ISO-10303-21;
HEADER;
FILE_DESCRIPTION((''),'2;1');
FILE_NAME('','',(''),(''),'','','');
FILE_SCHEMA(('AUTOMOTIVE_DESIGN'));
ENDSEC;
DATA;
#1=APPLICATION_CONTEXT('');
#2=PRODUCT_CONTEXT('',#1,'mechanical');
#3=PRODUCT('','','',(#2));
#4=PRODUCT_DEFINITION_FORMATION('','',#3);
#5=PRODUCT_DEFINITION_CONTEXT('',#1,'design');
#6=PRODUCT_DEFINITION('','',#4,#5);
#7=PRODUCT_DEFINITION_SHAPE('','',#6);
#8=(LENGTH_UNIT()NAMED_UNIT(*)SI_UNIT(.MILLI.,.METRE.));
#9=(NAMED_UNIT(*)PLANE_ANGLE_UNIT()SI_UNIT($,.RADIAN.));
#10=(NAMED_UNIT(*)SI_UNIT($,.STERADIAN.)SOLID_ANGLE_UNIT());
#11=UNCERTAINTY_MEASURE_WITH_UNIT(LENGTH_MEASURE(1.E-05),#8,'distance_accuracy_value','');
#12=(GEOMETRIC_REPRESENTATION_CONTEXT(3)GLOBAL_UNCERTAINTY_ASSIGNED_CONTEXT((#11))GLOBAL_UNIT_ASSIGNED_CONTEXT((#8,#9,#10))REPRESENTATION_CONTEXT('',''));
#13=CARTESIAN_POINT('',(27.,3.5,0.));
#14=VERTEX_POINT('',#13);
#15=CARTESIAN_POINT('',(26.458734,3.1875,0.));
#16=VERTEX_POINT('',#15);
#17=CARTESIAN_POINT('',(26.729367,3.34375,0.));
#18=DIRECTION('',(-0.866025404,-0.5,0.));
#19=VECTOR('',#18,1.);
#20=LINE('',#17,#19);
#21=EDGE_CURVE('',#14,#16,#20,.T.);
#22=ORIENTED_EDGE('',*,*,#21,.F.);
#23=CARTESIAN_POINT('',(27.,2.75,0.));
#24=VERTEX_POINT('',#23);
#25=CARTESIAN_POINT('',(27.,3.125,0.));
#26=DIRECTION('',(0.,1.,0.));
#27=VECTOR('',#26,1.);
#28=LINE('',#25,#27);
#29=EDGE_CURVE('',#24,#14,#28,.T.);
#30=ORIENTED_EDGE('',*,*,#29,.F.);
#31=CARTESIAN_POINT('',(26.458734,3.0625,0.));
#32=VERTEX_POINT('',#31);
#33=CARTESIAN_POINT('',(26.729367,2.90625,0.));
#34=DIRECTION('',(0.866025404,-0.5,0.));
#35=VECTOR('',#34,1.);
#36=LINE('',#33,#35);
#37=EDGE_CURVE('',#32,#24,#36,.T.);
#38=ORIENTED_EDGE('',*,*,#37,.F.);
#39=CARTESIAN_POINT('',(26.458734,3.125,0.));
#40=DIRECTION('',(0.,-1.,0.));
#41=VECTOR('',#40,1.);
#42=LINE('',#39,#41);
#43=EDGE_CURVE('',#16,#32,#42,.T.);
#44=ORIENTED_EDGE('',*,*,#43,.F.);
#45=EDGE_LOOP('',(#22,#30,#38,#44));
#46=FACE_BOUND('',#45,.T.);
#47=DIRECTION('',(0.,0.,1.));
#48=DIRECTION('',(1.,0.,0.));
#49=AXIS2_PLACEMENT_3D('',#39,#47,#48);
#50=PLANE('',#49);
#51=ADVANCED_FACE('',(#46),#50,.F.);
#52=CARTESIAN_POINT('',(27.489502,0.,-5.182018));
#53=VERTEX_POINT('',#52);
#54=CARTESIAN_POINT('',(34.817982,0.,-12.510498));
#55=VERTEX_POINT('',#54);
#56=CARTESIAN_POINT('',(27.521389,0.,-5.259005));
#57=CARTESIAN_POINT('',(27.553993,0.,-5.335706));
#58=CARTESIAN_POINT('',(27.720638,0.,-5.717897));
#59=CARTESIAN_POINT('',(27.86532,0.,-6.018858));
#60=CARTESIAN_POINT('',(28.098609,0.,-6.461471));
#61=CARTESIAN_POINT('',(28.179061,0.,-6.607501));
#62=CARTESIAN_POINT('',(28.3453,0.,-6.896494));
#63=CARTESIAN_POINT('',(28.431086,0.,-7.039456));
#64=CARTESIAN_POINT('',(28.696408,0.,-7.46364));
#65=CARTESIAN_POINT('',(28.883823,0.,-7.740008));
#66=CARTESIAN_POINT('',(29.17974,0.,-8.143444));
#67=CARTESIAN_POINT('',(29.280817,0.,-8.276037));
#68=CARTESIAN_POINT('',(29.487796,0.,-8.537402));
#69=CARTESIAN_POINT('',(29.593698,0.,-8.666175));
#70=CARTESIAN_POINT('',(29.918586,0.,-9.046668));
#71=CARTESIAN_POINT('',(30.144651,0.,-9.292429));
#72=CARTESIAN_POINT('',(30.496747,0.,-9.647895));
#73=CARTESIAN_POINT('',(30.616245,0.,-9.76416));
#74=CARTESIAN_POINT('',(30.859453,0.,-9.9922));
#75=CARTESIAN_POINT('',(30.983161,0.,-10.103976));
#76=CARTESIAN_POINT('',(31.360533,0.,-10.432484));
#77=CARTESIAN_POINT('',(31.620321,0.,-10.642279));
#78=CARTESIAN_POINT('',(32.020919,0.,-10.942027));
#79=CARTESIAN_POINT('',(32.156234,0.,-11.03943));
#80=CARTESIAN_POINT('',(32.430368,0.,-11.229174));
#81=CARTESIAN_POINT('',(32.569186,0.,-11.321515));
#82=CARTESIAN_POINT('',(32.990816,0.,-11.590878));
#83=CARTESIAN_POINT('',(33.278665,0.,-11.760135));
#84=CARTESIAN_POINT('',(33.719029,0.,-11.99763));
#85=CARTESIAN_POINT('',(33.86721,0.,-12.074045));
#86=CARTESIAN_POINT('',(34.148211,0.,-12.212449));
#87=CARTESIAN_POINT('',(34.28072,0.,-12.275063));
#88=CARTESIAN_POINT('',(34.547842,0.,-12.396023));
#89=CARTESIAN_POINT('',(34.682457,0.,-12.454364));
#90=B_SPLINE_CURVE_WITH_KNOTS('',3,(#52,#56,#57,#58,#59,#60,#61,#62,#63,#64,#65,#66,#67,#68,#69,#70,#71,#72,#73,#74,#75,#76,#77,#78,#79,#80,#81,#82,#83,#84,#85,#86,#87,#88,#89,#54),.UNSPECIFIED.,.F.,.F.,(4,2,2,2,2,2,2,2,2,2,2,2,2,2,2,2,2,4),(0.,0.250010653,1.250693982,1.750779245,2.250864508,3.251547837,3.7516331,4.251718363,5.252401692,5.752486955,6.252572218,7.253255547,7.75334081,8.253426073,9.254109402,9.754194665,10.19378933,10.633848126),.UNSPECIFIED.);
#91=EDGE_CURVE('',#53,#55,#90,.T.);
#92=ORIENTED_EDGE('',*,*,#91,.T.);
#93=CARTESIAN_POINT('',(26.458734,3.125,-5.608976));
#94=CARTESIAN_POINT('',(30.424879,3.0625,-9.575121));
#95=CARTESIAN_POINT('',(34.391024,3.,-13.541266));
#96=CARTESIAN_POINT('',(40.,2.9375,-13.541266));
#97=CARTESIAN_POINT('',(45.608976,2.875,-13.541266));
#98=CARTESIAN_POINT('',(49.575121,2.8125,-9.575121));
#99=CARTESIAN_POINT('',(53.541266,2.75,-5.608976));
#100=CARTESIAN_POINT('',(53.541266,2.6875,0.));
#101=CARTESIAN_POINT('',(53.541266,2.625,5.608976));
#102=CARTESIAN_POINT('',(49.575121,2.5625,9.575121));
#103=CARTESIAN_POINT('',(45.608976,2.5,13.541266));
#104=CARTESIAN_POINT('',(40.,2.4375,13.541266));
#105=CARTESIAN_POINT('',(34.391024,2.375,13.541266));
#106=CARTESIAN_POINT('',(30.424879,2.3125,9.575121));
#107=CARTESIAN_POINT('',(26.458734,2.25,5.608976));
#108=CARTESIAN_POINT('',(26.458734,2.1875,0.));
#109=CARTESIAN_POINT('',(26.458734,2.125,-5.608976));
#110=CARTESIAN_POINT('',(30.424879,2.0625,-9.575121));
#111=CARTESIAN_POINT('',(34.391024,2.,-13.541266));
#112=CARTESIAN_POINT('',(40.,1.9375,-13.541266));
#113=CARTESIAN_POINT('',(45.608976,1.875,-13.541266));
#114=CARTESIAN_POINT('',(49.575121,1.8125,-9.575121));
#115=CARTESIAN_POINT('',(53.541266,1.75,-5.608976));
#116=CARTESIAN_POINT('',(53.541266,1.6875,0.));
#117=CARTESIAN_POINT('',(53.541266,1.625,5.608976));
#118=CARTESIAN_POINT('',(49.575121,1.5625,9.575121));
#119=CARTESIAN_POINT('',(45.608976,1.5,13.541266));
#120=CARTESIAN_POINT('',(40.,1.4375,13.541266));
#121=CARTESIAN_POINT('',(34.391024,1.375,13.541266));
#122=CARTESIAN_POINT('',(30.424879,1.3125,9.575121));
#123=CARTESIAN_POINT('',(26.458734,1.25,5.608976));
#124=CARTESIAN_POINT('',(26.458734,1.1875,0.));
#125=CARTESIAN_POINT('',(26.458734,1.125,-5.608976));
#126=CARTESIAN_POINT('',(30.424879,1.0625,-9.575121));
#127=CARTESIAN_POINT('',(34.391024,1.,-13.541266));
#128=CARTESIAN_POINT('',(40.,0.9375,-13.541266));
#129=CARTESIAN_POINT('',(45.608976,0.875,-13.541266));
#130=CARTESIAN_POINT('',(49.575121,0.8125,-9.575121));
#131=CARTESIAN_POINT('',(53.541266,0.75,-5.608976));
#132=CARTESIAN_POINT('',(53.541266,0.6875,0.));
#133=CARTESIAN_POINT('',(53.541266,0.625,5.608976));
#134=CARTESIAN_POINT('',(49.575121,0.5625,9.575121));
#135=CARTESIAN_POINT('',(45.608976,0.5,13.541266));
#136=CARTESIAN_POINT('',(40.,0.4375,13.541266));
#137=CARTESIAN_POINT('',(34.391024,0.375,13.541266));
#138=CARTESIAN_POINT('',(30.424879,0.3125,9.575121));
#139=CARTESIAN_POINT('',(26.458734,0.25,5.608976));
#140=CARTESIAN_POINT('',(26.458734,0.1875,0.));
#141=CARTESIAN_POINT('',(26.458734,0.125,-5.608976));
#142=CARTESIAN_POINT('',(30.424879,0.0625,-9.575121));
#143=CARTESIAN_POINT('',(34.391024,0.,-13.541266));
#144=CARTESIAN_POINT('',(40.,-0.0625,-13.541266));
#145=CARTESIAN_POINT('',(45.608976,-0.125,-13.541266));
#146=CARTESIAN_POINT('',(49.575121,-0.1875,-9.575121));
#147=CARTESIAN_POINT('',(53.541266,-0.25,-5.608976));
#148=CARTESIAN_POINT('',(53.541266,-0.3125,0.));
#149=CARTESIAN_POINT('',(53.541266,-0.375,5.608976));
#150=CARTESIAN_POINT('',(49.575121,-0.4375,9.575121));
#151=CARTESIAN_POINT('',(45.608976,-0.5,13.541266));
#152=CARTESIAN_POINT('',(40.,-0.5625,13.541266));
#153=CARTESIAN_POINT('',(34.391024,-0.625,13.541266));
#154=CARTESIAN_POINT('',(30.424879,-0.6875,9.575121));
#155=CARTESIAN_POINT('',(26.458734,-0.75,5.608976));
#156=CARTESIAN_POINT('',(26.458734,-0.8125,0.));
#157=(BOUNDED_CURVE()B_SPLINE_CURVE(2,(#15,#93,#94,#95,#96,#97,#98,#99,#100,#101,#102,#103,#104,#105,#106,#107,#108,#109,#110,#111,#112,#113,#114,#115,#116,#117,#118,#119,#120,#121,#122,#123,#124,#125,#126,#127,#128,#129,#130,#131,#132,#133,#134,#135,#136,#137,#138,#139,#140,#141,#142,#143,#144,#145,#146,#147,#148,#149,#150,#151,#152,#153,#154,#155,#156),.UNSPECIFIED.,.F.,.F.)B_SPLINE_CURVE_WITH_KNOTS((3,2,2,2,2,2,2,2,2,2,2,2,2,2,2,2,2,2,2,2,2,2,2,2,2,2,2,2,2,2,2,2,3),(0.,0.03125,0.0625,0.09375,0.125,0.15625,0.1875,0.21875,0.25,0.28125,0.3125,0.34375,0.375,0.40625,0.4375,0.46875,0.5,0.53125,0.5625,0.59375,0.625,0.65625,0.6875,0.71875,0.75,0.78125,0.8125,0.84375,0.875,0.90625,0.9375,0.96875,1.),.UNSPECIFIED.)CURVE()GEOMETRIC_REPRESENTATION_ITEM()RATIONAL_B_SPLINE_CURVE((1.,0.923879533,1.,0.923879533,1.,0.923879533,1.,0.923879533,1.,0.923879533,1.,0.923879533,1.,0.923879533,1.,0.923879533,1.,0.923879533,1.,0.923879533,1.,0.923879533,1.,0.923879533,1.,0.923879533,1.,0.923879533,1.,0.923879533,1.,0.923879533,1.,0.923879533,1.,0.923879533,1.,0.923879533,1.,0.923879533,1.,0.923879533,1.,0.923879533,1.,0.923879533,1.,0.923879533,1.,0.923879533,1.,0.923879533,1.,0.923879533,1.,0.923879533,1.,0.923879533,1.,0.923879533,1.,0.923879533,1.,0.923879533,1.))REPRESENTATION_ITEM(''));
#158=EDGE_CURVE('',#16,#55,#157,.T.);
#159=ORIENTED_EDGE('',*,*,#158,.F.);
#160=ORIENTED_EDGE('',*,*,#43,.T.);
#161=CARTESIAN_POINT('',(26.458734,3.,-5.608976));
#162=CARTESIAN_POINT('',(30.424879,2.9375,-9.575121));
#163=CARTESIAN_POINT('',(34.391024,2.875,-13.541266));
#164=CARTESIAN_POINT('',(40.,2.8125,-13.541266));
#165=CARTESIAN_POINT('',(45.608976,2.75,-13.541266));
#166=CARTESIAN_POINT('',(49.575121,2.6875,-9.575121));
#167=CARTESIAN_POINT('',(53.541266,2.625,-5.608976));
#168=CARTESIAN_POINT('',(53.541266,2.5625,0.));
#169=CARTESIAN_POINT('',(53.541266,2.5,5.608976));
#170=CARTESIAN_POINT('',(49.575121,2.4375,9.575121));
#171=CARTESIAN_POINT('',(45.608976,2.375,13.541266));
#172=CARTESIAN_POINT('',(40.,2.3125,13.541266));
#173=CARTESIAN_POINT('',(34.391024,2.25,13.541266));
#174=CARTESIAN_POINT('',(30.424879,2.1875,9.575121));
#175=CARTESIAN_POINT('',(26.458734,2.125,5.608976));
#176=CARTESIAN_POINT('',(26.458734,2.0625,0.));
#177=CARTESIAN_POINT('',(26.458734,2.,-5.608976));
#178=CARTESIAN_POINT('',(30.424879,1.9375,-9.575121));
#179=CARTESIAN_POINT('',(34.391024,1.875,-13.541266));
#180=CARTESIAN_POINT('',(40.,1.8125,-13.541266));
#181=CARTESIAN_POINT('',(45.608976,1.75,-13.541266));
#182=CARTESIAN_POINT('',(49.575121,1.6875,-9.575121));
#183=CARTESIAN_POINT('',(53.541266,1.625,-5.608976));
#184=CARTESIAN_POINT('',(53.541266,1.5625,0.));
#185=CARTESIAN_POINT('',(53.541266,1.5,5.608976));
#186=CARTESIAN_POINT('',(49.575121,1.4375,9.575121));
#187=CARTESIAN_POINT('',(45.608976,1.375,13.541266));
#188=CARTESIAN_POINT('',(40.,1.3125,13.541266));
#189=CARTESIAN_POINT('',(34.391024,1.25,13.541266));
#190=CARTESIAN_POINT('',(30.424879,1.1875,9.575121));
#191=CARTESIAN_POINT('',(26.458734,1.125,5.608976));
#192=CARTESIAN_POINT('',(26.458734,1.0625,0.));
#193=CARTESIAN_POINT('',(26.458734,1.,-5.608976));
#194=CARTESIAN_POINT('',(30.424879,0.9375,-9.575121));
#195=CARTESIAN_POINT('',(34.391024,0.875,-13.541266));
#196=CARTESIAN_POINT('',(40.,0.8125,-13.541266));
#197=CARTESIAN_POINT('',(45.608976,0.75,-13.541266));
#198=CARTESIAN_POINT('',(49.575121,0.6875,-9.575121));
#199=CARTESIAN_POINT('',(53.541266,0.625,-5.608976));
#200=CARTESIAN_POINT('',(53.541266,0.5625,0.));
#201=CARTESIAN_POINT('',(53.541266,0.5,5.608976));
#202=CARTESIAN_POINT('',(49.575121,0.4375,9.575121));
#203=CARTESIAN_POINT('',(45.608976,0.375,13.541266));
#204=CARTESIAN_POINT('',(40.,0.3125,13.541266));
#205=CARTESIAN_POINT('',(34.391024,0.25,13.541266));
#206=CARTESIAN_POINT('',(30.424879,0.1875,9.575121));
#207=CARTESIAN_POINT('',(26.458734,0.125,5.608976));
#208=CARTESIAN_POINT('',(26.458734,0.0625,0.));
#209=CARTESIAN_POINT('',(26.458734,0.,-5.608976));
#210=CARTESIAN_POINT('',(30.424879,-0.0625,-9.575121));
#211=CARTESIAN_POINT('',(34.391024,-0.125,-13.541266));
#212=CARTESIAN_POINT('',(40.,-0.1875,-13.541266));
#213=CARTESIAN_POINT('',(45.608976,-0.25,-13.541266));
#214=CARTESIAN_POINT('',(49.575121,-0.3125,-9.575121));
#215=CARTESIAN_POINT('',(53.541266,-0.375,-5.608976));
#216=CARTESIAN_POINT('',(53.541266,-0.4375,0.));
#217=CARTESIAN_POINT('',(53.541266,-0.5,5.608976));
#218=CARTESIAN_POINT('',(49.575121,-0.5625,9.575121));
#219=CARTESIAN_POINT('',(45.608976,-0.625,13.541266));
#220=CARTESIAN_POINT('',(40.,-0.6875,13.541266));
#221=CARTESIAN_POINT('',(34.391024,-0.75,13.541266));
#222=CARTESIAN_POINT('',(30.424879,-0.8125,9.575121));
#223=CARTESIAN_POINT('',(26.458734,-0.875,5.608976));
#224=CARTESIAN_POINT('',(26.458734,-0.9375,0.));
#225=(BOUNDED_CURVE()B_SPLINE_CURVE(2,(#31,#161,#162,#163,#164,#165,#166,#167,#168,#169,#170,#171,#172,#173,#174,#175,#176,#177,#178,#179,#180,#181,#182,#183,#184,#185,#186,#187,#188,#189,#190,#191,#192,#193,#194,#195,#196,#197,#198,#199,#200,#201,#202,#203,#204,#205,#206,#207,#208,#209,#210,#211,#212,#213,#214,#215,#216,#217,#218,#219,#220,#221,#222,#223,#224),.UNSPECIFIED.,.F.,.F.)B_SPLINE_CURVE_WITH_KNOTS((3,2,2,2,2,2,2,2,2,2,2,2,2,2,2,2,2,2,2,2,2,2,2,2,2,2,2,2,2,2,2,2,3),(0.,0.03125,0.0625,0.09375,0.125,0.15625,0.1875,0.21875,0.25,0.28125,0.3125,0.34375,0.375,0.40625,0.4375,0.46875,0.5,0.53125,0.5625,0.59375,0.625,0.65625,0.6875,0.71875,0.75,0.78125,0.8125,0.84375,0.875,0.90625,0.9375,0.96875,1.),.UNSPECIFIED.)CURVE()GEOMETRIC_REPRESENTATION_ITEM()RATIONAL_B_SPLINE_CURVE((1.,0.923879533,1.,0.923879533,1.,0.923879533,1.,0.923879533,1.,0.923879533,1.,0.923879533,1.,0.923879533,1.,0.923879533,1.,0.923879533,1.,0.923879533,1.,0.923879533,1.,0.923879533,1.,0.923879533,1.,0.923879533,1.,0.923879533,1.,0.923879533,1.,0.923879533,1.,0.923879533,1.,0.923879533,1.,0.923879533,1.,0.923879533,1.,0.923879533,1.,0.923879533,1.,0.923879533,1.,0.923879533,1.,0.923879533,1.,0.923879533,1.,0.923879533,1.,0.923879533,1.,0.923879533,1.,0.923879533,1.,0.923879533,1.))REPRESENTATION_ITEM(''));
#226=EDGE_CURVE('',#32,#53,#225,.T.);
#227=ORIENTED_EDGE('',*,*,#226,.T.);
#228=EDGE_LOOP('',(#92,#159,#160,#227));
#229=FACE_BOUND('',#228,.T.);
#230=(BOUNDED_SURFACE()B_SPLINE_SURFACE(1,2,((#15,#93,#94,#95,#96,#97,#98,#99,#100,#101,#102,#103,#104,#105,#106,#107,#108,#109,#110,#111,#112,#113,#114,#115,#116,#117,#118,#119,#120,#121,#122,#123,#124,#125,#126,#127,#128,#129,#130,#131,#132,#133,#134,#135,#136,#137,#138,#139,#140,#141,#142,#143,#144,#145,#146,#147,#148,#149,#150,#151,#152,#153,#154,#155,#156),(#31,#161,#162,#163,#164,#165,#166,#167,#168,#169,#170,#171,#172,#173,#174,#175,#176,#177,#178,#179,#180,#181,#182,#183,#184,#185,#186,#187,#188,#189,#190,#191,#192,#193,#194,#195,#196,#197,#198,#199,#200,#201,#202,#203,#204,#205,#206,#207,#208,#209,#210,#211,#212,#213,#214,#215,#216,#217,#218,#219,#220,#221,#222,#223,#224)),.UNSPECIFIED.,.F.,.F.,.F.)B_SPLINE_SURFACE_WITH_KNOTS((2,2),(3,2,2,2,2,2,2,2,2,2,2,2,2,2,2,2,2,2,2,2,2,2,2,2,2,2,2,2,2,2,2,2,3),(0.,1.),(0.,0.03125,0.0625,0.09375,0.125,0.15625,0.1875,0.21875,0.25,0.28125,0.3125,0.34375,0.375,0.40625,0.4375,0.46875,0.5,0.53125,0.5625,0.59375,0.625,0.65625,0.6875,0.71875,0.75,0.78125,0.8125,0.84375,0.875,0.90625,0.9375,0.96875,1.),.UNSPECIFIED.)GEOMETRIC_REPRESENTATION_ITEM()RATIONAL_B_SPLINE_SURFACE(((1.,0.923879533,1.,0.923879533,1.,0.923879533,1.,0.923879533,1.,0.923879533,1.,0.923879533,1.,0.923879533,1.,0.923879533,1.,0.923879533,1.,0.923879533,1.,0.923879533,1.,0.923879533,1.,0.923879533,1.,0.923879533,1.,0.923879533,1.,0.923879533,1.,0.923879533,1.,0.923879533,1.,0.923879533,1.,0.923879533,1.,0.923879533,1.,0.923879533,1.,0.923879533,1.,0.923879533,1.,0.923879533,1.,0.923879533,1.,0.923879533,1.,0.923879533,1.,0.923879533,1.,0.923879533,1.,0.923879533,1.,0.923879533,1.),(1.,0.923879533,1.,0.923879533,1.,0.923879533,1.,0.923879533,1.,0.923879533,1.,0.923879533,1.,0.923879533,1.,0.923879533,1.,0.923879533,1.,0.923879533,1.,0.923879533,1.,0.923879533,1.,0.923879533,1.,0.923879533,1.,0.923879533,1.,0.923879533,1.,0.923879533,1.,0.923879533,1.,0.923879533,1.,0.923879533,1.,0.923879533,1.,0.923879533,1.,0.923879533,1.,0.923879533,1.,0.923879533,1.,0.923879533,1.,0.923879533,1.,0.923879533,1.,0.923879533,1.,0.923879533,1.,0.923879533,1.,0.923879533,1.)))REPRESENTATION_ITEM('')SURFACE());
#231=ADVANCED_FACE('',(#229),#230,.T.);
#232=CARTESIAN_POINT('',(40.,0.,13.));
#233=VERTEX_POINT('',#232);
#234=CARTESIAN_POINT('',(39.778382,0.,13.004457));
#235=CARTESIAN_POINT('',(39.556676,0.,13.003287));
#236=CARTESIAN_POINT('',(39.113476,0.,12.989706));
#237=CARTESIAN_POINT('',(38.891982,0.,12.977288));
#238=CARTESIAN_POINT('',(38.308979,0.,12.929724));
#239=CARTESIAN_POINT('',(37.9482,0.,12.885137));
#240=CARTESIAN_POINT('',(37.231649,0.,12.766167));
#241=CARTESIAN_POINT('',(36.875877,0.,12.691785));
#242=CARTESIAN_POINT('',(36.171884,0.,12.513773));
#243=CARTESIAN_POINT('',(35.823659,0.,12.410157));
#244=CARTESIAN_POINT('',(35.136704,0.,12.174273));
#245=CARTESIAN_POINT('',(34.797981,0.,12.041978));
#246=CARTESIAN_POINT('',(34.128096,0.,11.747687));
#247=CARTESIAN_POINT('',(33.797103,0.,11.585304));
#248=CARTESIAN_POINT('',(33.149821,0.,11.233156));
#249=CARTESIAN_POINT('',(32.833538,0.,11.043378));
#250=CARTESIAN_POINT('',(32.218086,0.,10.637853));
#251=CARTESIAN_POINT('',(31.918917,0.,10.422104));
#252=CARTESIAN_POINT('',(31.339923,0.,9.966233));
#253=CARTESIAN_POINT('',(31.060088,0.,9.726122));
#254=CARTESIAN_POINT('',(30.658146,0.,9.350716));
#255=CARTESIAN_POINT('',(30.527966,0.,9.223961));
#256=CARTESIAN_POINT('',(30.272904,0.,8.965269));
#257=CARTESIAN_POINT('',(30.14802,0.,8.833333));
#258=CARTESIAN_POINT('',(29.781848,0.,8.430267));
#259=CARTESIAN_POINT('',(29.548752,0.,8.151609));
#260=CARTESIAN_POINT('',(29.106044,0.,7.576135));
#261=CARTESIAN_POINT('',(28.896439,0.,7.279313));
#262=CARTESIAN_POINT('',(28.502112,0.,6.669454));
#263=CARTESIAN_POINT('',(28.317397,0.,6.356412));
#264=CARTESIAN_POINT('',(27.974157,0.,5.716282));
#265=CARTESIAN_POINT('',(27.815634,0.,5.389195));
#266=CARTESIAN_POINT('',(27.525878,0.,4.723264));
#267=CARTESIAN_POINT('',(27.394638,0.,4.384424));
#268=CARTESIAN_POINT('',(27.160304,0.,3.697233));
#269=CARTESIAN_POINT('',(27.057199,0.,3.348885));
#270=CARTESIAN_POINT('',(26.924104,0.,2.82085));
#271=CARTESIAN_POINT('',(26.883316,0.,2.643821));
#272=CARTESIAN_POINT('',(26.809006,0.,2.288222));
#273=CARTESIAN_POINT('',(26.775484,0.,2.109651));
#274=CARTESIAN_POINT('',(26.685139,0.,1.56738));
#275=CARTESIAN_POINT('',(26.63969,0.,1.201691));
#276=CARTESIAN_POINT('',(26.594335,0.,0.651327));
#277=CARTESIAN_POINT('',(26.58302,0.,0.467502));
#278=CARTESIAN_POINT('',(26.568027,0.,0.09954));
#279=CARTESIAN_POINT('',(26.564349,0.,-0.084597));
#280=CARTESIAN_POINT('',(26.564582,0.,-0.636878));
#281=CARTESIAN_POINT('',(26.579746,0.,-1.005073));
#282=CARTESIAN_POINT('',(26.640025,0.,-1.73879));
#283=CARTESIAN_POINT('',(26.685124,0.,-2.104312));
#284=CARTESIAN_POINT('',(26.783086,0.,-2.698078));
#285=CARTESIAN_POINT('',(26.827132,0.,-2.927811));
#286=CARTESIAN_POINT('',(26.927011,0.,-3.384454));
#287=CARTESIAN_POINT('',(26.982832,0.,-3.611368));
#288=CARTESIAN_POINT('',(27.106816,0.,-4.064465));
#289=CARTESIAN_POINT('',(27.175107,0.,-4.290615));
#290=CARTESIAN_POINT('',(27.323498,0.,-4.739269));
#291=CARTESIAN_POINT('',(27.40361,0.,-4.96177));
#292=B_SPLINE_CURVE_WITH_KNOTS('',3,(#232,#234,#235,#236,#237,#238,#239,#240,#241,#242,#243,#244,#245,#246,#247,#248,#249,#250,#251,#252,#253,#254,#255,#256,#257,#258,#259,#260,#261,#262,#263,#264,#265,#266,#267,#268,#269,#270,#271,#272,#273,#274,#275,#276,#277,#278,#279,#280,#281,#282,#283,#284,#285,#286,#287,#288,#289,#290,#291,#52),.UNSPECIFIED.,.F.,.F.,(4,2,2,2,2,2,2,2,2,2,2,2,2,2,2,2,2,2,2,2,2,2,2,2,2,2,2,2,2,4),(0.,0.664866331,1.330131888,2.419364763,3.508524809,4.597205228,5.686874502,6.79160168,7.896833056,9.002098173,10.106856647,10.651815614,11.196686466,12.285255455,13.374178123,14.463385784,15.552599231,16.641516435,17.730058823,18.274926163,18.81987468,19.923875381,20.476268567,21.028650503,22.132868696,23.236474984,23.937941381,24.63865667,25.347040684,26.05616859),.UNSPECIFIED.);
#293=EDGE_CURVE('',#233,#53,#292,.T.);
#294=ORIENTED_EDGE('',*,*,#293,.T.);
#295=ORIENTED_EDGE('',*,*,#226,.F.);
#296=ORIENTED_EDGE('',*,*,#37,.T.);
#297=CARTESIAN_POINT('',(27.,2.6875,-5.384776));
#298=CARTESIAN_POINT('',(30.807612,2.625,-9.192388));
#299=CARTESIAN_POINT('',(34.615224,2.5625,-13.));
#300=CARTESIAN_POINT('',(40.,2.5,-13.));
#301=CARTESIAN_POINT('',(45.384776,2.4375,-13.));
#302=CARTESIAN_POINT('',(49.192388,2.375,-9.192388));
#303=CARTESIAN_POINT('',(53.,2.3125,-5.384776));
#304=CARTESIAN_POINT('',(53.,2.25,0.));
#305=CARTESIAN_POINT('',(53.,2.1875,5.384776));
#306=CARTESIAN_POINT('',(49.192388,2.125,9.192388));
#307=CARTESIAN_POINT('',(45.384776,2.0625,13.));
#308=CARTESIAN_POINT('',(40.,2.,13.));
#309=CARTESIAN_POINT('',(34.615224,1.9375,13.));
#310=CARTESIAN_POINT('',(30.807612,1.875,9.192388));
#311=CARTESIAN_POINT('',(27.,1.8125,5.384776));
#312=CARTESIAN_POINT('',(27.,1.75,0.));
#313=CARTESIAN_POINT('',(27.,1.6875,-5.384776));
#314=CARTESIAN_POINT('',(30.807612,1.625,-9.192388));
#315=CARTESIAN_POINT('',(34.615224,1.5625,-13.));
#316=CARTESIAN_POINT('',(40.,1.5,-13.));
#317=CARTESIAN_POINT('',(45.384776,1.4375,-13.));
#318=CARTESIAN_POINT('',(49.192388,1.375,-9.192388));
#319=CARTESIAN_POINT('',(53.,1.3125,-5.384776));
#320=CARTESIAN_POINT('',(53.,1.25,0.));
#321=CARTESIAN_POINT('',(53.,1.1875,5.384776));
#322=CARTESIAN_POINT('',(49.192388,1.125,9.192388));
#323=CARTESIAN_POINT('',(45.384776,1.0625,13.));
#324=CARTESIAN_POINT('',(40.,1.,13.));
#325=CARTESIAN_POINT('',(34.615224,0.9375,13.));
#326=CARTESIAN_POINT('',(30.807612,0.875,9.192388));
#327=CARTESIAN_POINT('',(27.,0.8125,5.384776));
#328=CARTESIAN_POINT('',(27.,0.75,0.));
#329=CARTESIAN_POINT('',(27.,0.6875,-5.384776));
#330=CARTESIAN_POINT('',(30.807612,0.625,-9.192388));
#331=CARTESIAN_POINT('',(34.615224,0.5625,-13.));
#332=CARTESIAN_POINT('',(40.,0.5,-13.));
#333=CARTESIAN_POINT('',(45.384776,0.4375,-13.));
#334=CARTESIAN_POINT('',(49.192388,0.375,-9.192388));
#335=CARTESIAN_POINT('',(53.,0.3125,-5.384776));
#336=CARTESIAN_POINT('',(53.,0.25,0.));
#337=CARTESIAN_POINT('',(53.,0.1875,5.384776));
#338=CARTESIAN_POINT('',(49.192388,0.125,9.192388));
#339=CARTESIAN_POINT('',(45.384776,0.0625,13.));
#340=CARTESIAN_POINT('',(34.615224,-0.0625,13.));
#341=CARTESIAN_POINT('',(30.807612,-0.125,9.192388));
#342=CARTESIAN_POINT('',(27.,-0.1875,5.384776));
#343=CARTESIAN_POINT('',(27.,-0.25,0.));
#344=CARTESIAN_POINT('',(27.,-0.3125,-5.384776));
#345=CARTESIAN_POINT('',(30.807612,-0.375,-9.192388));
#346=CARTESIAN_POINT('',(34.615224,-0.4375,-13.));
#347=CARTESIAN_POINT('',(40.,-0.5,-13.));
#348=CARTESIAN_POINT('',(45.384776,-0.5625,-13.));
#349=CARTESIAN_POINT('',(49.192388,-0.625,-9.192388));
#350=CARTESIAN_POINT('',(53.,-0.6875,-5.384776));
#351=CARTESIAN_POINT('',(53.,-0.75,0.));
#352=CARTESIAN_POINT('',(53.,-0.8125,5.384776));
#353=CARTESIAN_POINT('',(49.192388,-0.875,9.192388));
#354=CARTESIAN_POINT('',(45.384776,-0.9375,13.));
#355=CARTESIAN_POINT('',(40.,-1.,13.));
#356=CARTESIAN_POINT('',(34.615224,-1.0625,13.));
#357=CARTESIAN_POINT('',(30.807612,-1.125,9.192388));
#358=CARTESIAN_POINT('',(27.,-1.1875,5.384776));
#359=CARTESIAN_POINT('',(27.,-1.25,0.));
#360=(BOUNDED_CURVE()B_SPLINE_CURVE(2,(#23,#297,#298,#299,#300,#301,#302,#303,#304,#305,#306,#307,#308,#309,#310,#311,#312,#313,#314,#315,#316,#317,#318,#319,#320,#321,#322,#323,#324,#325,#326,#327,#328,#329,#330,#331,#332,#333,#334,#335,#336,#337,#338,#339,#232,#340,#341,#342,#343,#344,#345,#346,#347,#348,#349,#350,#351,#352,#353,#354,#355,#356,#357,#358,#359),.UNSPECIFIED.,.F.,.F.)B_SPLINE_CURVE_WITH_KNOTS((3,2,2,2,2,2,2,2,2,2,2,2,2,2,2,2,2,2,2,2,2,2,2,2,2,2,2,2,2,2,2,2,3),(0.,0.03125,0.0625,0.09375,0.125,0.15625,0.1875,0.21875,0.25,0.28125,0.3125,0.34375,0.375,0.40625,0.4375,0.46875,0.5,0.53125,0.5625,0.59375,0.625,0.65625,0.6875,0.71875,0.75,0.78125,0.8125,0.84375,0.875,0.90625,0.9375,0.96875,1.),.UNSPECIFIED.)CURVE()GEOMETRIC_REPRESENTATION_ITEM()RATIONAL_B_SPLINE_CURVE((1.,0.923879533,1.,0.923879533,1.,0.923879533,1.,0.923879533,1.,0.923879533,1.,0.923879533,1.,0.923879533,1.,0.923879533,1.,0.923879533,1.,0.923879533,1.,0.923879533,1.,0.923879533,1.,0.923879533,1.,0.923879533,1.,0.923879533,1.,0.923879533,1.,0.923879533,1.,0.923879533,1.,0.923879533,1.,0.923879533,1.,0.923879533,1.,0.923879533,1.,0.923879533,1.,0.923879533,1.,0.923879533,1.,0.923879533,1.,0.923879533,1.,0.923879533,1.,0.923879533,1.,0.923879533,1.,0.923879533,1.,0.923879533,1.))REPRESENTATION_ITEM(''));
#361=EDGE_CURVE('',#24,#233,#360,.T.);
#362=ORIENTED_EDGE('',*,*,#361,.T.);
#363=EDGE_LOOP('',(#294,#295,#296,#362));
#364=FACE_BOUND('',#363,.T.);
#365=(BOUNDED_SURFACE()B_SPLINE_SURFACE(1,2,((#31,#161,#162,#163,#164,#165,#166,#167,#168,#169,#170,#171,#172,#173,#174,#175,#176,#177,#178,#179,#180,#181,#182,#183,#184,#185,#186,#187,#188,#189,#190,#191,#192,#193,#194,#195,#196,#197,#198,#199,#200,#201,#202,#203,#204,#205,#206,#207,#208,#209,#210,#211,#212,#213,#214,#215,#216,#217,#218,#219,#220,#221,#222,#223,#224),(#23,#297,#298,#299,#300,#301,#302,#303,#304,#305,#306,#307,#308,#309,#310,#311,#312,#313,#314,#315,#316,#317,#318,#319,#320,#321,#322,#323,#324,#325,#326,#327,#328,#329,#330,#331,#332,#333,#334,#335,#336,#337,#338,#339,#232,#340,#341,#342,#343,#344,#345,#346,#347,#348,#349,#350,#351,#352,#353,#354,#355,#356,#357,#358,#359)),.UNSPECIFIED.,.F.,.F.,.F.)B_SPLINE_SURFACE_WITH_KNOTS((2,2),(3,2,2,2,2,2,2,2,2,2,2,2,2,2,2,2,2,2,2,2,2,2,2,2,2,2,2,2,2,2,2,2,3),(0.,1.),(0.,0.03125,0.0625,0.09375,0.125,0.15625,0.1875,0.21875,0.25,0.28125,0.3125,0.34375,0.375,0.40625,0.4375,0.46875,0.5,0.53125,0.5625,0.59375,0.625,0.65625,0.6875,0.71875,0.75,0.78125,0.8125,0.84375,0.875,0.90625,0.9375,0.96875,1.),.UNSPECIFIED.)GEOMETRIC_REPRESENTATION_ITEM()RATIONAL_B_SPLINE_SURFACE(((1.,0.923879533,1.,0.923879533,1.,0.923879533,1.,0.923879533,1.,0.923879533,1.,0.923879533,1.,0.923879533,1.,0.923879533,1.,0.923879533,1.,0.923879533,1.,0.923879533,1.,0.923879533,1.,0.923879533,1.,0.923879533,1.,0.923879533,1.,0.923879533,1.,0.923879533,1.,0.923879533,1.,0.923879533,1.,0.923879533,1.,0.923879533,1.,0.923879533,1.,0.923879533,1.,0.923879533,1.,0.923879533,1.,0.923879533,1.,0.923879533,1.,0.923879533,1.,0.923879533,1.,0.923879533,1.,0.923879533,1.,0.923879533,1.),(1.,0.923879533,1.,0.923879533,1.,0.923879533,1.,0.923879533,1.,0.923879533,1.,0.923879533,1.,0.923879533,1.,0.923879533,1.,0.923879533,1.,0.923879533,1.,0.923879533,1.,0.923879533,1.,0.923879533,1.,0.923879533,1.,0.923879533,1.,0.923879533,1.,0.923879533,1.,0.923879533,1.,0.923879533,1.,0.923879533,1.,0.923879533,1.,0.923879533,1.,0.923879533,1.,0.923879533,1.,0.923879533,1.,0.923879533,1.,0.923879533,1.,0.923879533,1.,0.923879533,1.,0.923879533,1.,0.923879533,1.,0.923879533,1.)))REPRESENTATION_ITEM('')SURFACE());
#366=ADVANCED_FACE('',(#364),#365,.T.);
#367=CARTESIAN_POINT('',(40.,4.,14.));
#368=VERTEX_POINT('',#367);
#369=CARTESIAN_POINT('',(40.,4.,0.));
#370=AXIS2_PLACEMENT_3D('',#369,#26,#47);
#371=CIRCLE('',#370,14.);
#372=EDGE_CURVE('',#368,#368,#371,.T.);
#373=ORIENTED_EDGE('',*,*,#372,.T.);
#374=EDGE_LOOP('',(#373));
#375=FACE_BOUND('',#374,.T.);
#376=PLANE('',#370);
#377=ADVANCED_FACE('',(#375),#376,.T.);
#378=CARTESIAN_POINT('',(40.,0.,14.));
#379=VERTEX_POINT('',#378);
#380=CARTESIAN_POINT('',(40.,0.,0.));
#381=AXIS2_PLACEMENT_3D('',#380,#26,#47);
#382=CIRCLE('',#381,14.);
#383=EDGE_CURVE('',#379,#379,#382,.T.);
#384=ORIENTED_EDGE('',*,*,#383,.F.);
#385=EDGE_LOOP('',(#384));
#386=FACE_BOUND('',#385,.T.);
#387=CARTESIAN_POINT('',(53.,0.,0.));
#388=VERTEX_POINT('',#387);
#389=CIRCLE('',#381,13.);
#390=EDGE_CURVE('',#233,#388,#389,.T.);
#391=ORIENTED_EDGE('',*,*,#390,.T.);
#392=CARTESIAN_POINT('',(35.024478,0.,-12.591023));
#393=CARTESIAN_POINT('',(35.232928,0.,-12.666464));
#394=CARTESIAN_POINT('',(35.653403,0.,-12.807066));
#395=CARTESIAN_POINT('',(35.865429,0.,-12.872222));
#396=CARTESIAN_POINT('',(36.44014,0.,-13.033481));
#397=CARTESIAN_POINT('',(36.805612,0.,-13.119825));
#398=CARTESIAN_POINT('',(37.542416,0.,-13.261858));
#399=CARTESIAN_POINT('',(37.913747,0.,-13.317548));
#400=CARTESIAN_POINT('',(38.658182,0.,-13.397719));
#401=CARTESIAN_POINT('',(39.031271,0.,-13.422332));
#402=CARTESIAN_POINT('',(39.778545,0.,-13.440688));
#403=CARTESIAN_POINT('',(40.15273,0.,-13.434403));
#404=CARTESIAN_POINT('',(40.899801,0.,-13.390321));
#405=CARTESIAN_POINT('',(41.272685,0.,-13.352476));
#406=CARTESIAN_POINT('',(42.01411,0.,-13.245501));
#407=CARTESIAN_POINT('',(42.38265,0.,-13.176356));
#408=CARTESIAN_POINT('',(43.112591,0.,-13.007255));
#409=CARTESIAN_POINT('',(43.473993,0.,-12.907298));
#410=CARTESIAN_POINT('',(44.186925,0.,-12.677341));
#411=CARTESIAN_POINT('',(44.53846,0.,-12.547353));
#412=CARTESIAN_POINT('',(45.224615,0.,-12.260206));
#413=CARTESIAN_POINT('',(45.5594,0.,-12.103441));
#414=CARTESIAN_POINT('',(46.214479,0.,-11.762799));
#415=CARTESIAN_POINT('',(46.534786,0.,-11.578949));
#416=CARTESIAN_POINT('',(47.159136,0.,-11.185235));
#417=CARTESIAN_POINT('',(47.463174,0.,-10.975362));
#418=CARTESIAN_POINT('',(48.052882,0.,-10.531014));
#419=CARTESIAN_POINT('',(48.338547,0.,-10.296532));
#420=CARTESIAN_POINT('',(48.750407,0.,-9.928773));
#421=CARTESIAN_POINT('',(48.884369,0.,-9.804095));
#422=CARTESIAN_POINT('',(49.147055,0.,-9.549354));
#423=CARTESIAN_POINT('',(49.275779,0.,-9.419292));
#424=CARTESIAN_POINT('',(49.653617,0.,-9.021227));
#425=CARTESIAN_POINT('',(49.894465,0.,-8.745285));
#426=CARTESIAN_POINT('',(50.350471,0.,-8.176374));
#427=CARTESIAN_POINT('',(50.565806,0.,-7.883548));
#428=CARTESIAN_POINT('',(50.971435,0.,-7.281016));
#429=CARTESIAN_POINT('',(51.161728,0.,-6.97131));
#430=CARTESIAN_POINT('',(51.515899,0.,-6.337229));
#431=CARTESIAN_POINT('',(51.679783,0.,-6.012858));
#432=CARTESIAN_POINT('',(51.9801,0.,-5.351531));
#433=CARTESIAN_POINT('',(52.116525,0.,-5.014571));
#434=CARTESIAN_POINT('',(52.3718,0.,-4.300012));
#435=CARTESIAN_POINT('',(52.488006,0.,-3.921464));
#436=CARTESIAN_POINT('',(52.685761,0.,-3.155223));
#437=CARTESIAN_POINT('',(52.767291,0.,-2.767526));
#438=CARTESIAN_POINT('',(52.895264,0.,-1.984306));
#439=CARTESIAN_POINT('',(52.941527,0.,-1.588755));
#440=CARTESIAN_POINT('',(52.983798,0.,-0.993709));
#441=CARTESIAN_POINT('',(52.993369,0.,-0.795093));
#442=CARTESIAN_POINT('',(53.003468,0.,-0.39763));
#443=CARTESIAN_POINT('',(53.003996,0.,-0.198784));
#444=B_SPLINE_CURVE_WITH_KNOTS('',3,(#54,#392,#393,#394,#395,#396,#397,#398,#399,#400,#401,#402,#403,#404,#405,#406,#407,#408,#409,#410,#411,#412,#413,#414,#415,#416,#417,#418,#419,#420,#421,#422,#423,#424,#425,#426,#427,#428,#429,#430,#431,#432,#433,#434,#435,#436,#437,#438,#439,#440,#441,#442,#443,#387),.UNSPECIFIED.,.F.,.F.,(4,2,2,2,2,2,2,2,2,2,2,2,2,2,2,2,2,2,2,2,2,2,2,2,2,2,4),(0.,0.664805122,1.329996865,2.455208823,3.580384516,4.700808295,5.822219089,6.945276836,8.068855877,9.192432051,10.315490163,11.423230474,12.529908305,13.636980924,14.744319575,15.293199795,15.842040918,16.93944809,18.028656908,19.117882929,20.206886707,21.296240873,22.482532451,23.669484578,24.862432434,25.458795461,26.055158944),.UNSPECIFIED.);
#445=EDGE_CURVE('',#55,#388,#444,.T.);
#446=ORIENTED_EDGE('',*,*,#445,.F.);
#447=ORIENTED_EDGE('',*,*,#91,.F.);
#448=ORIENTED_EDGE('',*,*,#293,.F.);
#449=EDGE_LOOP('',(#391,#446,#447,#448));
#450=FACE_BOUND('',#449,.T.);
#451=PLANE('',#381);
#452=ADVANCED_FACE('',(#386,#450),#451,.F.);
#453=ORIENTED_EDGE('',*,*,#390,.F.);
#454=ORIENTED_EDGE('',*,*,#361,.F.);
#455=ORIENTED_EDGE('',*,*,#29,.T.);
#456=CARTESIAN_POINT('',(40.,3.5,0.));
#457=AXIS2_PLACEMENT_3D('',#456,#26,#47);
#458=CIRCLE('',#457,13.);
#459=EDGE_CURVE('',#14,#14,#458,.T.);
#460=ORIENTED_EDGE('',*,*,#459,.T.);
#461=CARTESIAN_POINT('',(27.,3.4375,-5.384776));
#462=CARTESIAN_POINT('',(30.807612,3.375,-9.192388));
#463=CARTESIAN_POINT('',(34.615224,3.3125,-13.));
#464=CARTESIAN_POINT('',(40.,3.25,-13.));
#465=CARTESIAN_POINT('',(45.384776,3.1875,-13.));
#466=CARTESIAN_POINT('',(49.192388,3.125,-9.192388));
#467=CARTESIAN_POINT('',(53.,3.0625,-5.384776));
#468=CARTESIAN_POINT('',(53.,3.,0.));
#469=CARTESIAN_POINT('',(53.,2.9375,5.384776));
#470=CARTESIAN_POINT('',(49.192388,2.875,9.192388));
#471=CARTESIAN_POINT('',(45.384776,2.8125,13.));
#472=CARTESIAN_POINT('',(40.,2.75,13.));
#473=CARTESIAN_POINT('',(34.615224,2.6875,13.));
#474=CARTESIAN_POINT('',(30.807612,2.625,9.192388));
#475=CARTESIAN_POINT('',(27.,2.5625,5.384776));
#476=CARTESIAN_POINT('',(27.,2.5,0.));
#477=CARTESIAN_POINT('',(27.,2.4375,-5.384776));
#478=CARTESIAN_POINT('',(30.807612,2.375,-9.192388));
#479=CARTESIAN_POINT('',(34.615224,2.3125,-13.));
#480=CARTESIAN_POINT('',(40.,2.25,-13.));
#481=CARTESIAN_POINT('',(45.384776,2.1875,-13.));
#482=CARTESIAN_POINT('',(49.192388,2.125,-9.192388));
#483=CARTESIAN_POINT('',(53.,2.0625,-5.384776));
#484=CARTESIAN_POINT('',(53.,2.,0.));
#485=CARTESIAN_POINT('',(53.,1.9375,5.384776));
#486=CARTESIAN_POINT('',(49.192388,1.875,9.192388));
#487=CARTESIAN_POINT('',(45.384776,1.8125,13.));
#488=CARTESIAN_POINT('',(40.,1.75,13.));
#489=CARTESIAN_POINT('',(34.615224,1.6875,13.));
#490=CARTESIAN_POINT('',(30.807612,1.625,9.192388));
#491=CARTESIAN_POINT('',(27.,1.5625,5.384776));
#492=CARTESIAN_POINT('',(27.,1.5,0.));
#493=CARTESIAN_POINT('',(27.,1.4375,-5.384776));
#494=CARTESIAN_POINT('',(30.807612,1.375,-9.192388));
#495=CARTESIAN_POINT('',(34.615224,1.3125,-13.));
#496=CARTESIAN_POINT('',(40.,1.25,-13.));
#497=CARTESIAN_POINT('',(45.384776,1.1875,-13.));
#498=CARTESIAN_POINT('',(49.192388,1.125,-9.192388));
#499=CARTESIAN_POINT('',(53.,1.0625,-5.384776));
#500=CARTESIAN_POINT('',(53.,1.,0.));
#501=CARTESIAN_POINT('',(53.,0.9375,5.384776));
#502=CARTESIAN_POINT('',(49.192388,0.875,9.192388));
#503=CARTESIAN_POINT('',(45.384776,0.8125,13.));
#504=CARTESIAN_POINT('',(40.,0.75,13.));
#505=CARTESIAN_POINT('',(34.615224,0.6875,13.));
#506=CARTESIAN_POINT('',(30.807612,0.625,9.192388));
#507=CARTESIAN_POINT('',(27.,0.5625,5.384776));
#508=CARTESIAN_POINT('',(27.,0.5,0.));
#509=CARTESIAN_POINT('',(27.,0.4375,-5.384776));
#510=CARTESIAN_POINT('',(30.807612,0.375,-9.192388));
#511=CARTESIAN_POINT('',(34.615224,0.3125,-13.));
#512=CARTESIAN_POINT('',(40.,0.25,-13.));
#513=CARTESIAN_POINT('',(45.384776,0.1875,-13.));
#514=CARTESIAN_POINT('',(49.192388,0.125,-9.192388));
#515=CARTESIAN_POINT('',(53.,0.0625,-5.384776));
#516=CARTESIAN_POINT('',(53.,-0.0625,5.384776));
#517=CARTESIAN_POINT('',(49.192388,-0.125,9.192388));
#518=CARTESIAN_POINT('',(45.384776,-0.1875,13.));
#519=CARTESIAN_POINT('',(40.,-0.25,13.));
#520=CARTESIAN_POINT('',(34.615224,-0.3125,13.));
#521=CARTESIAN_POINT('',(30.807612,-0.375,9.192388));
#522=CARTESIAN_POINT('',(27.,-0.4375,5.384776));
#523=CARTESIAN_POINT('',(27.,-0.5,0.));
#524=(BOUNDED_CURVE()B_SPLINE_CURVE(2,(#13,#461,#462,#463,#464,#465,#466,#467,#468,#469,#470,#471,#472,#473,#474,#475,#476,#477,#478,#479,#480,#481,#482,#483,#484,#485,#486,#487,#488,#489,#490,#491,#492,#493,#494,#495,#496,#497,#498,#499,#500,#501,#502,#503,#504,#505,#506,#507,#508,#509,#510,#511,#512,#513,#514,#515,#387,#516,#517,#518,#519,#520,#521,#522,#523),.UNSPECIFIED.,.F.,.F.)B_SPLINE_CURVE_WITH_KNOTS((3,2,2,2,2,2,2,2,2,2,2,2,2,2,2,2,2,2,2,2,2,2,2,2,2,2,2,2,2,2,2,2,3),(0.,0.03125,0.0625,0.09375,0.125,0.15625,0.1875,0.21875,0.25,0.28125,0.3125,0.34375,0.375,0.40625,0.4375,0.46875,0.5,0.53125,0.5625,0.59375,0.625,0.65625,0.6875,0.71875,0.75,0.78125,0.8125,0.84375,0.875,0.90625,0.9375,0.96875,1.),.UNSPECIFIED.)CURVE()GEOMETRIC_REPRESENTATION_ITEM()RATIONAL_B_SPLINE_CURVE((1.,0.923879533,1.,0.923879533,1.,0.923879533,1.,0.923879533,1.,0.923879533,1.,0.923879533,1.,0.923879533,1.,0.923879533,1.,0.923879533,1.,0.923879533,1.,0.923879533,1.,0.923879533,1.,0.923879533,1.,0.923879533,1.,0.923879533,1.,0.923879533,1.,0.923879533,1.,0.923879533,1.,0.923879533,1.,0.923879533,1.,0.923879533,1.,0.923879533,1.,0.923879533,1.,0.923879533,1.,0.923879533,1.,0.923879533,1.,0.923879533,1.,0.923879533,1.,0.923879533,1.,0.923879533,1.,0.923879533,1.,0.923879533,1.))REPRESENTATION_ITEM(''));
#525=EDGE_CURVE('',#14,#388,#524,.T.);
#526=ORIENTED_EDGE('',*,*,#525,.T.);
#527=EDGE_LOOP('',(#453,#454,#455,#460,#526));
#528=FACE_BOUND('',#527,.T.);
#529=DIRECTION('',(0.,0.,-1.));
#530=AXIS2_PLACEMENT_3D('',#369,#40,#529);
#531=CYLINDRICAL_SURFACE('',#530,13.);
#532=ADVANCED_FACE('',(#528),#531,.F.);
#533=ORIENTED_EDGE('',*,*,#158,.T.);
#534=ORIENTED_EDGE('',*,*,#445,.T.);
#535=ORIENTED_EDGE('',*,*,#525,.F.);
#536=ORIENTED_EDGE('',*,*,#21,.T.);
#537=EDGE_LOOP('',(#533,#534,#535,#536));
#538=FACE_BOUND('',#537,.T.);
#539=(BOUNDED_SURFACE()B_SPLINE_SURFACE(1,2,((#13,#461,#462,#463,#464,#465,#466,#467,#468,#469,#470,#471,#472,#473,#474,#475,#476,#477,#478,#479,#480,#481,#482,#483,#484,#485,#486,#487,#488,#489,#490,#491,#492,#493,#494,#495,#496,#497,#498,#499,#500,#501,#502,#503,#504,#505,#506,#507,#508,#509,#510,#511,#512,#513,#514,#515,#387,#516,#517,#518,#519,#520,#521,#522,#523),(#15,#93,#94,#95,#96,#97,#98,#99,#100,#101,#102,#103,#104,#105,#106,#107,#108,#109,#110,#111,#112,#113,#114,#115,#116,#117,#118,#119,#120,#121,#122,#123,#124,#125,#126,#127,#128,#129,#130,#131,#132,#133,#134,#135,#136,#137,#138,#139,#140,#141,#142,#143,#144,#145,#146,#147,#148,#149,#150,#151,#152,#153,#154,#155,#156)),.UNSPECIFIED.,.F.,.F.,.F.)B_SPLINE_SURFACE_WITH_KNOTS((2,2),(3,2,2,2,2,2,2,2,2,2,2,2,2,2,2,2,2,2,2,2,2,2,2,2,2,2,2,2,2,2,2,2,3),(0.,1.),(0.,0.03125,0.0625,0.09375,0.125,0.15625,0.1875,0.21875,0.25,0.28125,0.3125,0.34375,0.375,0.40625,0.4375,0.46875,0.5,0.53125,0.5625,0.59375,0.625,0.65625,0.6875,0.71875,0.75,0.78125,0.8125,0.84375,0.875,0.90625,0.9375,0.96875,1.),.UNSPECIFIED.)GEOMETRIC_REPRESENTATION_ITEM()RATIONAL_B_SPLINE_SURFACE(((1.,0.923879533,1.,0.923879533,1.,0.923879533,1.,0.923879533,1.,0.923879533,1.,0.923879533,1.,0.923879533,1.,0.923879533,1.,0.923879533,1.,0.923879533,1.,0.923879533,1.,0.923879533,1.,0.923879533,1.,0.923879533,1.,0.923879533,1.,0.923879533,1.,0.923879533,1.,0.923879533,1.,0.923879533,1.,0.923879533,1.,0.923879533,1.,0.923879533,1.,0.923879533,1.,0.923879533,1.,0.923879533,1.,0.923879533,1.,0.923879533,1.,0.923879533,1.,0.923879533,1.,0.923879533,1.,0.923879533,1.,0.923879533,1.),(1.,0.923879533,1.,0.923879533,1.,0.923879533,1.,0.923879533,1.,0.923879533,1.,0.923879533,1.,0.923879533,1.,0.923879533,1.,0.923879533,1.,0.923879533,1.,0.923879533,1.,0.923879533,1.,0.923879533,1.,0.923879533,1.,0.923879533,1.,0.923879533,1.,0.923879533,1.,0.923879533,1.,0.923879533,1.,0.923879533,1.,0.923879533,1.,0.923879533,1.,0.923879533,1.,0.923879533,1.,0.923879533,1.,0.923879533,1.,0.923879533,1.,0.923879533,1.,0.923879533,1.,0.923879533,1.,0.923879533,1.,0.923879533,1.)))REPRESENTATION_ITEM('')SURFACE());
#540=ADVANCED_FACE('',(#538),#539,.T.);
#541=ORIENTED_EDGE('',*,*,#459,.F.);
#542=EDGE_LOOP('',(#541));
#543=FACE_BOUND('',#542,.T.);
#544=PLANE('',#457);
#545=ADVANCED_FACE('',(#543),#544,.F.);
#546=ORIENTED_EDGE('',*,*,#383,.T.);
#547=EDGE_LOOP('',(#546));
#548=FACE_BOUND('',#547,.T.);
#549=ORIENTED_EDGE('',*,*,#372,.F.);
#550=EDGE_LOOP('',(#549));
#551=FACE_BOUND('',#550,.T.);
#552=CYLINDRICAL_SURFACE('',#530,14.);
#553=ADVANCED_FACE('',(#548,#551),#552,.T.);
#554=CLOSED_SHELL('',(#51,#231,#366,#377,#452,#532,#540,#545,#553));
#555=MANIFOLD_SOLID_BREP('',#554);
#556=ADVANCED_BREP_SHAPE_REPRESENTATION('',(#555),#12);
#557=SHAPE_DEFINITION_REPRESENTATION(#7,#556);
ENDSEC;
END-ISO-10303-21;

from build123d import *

# Parameters (mm, degrees)
SKETCH7_R           = 14
SKETCH7_R_2         = 13
BOSS_EXTRUDE2_DEPTH = 4
BOSS_EXTRUDE6_START = 3.5
SKETCH7_3_R         = 14
BOSS_EXTRUDE6_DEPTH = 0.5
THREAD3_PITCH       = 1


with BuildPart() as part:
    # Sketch7 → Boss-Extrude2 (new body)
    with BuildSketch(Plane(origin=(0, 0, 0), x_dir=(1, 0, 0), z_dir=(0, 1, 0))):
        with Locations(Location((40, 0, 0), (0, 0, 270))):
            Circle(SKETCH7_R)
        with Locations(Location((40, 0, 0), (0, 0, 270))):
            Circle(SKETCH7_R_2, mode=Mode.SUBTRACT)
    extrude(amount=BOSS_EXTRUDE2_DEPTH)

    # Sketch7<3> → Boss-Extrude6 (add)
    with BuildSketch(Plane(origin=(0, 0, 0), x_dir=(1, 0, 0), z_dir=(0, 1, 0)).offset(BOSS_EXTRUDE6_START)):
        with Locations(Location((40, 0, 0), (0, 0, 270))):
            Circle(SKETCH7_3_R)
    extrude(amount=BOSS_EXTRUDE6_DEPTH)

    # Thread3: arcs per turn and ends read off the stored shape
    # Thread3: the profile of Thread Profile3 profile screwed along a right-hand helix through 4 turns, 8 arcs to a turn; built about Z, then put on its axis
    thread3_z = Axis((0, 0, 0), (0, 0, 1))
    thread3_corners = [(12.9997, 0, -0.000173205), (13.541265875, 0, 0.312499999), (13.541265875, 0, 0.437499999), (12.9997, 0, 0.750173202)]
    with BuildLine(mode=Mode.PRIVATE) as thread3_profile:
        Line(thread3_corners[0], thread3_corners[1])
        Line(thread3_corners[1], thread3_corners[2])
        Line(thread3_corners[2], thread3_corners[3])
        Line(thread3_corners[3], thread3_corners[0])
    thread3_cap = Face(thread3_profile.wire())
    thread3_turn_angles = [0, 22.5, 45, 67.5, 90, 112.5, 135, 157.5, 180, 202.5, 225, 247.5, 270, 292.5, 315, 337.5, 360]
    thread3_turn_weights = [1, 0.9238795325112867, 1, 0.9238795325112867, 1, 0.9238795325112867, 1, 0.9238795325112867, 1, 0.9238795325112867, 1, 0.9238795325112867, 1, 0.9238795325112867, 1, 0.9238795325112867, 1]
    thread3_turn_rails = [Edge.make_bspline([Vector(p[0], p[1], 0).rotate(thread3_z, thread3_turn_angles[k]) / thread3_turn_weights[k] + Vector(0, 0, p[2] + THREAD3_PITCH * thread3_turn_angles[k] / 360) for k in range(17)], [0, 0, 0, 1, 1, 2, 2, 3, 3, 4, 4, 5, 5, 6, 6, 7, 7, 8, 8, 8], 2, thread3_turn_weights) for p in thread3_corners]
    thread3_turn_sides = [Face.make_surface_from_curves(thread3_turn_rails[p[0]], thread3_turn_rails[p[1]]) for p in [(0, 1), (1, 2), (2, 3), (3, 0)]]
    thread3 = Plane(origin=(40, 3.5, 0), x_dir=(-1, 0, 0), z_dir=(0, -1, 0)) * Solid(Shell([*[p.moved(Location((0, 0, THREAD3_PITCH * i))) for i in range(4) for p in thread3_turn_sides], thread3_cap, thread3_cap.rotate(thread3_z, 1440).moved(Location((0, 0, THREAD3_PITCH * 1440 / 360)))]))
    add(thread3, mode=Mode.SUBTRACT)


solid = part.part
